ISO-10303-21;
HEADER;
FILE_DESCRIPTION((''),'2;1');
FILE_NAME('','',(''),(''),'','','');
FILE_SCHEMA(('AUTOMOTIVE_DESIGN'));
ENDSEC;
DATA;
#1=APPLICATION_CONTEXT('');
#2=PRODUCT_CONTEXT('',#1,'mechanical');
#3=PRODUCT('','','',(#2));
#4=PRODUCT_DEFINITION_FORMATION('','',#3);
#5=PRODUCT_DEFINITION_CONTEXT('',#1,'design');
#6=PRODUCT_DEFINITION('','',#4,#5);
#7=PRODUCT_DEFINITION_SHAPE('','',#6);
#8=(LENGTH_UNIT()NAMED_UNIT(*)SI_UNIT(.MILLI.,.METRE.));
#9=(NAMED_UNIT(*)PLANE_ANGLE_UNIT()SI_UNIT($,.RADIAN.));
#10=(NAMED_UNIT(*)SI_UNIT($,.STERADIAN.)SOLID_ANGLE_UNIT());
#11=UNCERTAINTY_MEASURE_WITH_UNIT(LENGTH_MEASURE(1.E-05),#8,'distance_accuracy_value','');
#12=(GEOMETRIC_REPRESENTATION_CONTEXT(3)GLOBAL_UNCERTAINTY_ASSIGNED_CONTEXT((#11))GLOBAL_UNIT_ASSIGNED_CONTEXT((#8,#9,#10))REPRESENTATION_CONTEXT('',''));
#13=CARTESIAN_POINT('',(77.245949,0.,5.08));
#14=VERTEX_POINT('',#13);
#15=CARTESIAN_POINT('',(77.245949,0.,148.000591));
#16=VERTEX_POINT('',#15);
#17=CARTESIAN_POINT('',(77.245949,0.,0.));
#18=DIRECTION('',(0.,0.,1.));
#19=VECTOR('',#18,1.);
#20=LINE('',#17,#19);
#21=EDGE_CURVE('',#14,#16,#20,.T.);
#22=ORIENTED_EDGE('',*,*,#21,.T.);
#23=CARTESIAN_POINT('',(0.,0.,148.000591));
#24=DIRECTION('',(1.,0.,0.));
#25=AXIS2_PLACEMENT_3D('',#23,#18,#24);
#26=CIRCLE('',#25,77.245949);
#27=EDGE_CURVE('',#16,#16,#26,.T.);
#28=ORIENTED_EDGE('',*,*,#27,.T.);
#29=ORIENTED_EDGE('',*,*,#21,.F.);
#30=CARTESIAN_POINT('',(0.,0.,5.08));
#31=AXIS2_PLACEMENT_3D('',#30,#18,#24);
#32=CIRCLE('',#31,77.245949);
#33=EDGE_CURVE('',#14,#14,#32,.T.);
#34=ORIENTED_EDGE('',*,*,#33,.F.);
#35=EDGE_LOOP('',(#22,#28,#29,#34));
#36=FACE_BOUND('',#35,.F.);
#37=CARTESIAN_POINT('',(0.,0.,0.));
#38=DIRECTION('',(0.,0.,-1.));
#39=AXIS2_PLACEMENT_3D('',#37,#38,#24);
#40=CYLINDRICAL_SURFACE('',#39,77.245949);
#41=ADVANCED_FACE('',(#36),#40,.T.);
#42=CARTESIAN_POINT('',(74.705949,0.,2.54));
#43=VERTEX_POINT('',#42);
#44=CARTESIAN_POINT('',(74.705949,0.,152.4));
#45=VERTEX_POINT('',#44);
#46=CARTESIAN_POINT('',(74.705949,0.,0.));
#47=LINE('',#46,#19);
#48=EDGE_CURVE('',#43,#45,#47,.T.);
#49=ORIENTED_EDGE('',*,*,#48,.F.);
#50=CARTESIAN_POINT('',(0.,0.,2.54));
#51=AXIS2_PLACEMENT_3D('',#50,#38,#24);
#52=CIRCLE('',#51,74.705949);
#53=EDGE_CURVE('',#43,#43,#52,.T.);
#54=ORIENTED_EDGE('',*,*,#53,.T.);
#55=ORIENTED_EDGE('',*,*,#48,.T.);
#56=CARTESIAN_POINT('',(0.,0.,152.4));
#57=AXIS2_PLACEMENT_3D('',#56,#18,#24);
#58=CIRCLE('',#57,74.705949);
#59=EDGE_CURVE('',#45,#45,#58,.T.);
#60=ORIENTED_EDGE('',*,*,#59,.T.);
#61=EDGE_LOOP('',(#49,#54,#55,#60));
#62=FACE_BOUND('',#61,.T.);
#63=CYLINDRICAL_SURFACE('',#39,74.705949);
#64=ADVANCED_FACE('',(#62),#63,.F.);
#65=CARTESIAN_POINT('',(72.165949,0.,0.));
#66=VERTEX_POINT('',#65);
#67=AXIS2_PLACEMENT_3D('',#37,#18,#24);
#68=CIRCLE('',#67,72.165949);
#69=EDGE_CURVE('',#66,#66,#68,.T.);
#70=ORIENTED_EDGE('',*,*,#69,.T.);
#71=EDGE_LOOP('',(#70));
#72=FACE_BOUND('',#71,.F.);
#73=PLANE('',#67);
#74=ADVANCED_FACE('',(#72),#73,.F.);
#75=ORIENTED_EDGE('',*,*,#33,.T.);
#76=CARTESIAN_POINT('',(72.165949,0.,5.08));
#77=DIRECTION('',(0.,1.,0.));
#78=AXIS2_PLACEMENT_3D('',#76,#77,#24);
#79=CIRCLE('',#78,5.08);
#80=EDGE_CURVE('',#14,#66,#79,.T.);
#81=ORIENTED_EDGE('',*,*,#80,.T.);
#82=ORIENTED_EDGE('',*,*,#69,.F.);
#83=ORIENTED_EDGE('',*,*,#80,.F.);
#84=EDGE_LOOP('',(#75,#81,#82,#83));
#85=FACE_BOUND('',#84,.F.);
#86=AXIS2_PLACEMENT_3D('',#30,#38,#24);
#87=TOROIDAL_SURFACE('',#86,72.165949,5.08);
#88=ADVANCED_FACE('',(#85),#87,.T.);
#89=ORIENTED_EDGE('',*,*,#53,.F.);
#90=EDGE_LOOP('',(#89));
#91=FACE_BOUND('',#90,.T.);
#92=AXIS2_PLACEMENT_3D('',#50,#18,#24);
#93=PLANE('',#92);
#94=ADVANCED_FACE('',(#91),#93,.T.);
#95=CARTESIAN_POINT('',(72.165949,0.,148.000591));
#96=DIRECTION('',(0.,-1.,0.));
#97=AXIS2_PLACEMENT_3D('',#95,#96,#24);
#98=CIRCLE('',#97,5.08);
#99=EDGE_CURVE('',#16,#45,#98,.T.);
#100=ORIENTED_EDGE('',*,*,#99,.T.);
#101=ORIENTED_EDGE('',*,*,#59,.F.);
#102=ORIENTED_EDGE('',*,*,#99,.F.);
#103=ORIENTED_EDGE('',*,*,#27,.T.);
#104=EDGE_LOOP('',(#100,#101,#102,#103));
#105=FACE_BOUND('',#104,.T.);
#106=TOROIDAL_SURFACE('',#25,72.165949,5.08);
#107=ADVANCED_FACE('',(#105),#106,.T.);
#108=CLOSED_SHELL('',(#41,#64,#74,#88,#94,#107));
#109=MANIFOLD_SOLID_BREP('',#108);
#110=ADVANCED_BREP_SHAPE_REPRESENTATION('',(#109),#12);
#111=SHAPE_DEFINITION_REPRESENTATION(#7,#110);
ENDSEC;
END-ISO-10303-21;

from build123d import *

# Parameters (mm, degrees)
F0_R     = 77.2459494585
F1_DEPTH = 152.4
F2_T     = -2.54


# Not quite as in the source:
# - a fillet or chamfer that OpenCascade refuses, or shapes differently, is made with other operations: its cross-section is extruded or revolved along the edge and cut away or added


with BuildPart() as f1:
    # F0 (on Top) → F1 (new body)
    with BuildSketch(Plane.XY):
        Circle(F0_R)
    extrude(amount=F1_DEPTH)

    # F2
    f2_openings = [f1.faces().sort_by_distance(p)[0] for p in [
        (0, 0, 152.4),
    ]]
    offset(amount=F2_T, openings=f2_openings)

    # F3: fillet of radius 5.08 on 3 edges, made by hand

    # F3_s1 → F3_t2 (revolve, cut)
    with BuildSketch(Plane.XZ):
        with BuildLine():
            ThreePointArc((77.2459494585, 5.08), (75.758051907, 1.4878975516), (72.1659494585, 0))
            Line((72.1659494585, 0), (72.1659494585, -0.1016))
            Line((72.1659494585, -0.1016), (77.3475494585, -0.1016))
            Line((77.3475494585, -0.1016), (77.3475494585, 5.08))
            Line((77.3475494585, 5.08), (77.2459494585, 5.08))
        make_face()
    revolve(axis=Axis((0, 0, 0), (0, 0, 1)), mode=Mode.SUBTRACT)

    # F3_s3 → F3_t4 (revolve, cut)
    with BuildSketch(Plane.XZ):
        with BuildLine():
            ThreePointArc((77.2459494585, 148.0005909488), (76.5653585098, 150.5405909488), (74.7059494585, 152.4))
            Line((74.7059494585, 152.4), (74.7567494585, 152.487988181))
            ThreePointArc((74.7567494585, 152.487988181), (75.9759494585, 152.5016), (77.2459494585, 152.5016))
            Line((77.2459494585, 152.5016), (77.3475494585, 152.4))
            Line((77.3475494585, 152.4), (77.3475494585, 148.0005909488))
            Line((77.3475494585, 148.0005909488), (77.2459494585, 148.0005909488))
        make_face()
    revolve(axis=Axis((0, 0, 152.4), (0, 0, 1)), mode=Mode.SUBTRACT)


solid = f1.part
